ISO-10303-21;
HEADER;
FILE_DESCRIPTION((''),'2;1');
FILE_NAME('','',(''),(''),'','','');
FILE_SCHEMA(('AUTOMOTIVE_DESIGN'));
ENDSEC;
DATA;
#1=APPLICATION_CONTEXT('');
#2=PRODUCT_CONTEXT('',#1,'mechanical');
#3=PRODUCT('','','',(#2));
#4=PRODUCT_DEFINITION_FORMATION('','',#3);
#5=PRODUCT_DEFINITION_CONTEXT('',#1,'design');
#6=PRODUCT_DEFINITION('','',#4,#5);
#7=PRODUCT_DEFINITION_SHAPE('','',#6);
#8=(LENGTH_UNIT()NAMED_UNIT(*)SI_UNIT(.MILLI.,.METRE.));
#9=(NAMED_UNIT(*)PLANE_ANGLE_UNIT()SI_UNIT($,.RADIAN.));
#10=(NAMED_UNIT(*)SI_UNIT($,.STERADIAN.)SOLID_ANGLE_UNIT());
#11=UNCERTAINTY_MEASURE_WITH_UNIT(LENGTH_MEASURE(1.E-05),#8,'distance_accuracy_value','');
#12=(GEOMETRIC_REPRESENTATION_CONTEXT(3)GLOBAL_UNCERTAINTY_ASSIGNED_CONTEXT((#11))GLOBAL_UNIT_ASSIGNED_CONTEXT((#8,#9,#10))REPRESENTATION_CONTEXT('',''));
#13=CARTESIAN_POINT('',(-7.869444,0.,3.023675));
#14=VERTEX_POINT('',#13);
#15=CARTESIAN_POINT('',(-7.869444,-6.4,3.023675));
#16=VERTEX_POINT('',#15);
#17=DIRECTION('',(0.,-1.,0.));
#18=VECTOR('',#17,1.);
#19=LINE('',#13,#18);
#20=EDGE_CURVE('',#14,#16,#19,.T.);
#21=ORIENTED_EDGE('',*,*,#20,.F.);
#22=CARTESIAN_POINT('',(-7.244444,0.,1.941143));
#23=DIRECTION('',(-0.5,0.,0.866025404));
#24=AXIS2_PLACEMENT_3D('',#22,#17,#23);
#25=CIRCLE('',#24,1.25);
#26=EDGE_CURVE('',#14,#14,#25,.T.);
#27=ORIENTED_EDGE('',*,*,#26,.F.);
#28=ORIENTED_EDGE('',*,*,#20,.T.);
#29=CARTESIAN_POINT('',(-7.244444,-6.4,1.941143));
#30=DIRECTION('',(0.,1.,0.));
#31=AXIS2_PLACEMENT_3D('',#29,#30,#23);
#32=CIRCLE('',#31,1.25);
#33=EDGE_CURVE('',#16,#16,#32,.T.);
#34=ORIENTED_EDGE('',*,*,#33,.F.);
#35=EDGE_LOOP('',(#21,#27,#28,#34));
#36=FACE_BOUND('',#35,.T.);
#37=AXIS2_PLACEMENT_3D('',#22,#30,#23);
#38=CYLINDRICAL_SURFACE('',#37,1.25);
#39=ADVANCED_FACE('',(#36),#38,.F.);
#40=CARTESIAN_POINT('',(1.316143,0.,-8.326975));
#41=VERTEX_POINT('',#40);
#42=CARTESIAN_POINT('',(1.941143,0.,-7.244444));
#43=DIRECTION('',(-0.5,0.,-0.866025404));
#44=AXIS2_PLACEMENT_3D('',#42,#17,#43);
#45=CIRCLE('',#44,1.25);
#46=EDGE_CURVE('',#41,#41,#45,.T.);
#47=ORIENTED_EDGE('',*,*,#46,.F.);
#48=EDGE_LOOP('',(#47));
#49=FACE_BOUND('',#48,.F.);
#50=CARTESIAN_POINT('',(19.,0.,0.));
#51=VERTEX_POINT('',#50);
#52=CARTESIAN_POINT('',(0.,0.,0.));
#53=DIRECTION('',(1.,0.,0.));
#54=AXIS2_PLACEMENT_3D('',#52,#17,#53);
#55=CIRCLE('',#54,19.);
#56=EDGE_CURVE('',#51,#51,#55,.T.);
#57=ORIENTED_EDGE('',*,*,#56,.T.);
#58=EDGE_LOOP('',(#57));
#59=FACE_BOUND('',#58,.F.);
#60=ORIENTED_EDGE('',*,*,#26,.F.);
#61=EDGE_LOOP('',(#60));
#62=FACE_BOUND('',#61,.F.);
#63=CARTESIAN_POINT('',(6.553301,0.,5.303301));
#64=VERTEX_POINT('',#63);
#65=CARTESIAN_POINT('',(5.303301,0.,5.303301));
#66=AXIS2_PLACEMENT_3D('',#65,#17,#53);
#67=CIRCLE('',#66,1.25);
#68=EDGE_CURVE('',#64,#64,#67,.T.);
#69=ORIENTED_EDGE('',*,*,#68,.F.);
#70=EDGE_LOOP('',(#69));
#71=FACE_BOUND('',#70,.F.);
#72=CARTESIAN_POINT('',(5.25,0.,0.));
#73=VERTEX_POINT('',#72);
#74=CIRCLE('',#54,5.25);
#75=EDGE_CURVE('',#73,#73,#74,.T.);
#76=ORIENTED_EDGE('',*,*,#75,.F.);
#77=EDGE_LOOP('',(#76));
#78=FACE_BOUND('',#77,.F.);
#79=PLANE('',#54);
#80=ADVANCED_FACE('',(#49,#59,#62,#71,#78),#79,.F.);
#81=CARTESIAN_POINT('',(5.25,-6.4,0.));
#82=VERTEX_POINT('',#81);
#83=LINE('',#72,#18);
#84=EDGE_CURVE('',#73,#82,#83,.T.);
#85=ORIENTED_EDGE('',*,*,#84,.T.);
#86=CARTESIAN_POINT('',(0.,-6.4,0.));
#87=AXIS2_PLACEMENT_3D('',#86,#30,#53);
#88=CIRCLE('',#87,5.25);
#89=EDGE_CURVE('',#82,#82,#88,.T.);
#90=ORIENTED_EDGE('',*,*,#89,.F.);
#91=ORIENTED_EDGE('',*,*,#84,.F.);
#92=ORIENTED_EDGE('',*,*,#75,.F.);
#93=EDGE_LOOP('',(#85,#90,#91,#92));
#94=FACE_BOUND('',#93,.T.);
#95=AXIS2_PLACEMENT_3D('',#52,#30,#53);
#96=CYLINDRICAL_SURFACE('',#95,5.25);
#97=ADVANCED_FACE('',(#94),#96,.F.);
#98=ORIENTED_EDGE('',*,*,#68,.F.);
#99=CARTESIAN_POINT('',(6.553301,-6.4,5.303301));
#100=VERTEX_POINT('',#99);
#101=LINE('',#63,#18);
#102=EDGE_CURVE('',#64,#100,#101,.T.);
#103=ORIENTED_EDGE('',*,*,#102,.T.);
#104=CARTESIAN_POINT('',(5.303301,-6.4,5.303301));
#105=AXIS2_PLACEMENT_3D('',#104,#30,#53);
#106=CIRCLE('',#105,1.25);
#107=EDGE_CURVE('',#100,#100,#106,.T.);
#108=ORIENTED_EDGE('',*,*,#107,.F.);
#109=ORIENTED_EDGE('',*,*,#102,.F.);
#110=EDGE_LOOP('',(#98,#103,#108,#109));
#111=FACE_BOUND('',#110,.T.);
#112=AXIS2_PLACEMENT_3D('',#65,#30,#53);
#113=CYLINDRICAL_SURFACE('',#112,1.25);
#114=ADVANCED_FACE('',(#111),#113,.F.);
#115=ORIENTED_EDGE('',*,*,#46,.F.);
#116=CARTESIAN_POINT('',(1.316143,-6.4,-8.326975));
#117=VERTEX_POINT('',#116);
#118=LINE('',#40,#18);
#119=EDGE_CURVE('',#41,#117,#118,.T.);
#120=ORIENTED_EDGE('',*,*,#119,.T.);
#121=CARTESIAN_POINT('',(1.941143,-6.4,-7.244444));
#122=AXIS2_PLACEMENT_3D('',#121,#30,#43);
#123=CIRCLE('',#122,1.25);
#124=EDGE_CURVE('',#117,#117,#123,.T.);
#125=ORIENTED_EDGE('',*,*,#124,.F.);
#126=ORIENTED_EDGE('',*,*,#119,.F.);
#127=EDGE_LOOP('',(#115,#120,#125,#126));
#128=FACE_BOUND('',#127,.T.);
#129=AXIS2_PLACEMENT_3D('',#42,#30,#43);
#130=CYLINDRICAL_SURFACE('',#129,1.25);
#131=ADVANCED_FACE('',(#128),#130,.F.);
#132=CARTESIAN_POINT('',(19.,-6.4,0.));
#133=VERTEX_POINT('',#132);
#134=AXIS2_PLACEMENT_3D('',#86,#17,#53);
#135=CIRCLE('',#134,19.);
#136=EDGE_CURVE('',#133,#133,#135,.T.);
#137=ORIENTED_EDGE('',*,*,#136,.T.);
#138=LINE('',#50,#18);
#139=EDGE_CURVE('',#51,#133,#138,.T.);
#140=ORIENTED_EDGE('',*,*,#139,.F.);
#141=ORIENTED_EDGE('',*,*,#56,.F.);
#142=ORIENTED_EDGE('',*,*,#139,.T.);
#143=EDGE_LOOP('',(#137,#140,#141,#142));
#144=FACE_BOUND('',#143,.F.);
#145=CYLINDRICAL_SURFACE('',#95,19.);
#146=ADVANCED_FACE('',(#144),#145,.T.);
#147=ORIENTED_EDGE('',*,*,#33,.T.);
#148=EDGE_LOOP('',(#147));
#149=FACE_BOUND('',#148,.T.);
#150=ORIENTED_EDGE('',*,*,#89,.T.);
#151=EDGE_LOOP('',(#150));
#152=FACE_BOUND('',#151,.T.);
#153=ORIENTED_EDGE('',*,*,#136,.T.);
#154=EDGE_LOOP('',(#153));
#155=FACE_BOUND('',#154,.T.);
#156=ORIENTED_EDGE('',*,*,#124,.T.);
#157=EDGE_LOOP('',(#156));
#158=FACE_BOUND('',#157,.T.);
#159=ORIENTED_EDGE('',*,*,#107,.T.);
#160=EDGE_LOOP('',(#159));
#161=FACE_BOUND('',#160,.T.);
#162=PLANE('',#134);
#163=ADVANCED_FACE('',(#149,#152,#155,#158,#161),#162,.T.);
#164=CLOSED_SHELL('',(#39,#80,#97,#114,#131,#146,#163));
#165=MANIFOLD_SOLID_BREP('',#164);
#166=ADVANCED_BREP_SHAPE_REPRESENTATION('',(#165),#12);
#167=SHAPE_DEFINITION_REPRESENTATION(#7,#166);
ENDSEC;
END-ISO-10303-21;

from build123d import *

# Parameters (mm, degrees)
F0_R            = 19
F1_DEPTH        = 6.4
F2_R            = 1.25
F3_DEPTH        = 25.4
F3_COPIES_COUNT = 3
F4_R            = 5.25
F5_DEPTH        = 6.401


# Not quite as in the source:
# - a pattern or mirror of a feature is missing from the dataset's text; its kind, count and spacing are read off the source's solid


with BuildPart() as f1:
    # F0 (on Front) → F1 (new body)
    with BuildSketch(Plane.XZ):
        Circle(F0_R)
    extrude(amount=F1_DEPTH)

    # F2 (on Front) → F3 (cut)
    with BuildSketch(Plane.XZ):
        with Locations((5.3033008589, 5.3033008589)):
            Circle(F2_R)
    f3 = extrude(amount=F3_DEPTH, mode=Mode.SUBTRACT)

    # F3_copies: F3 ×3 about axis
    f3_copies_axis = Axis((0, 0, 0), (0, 1, 0))
    for i in range(1, F3_COPIES_COUNT):
        add(f3.rotate(f3_copies_axis, i * 360 / F3_COPIES_COUNT), mode=Mode.SUBTRACT)

    # F4 (on Front) → F5 (cut, through all)
    with BuildSketch(Plane.XZ):
        Circle(F4_R)
    extrude(amount=F5_DEPTH, mode=Mode.SUBTRACT)


solid = f1.part
